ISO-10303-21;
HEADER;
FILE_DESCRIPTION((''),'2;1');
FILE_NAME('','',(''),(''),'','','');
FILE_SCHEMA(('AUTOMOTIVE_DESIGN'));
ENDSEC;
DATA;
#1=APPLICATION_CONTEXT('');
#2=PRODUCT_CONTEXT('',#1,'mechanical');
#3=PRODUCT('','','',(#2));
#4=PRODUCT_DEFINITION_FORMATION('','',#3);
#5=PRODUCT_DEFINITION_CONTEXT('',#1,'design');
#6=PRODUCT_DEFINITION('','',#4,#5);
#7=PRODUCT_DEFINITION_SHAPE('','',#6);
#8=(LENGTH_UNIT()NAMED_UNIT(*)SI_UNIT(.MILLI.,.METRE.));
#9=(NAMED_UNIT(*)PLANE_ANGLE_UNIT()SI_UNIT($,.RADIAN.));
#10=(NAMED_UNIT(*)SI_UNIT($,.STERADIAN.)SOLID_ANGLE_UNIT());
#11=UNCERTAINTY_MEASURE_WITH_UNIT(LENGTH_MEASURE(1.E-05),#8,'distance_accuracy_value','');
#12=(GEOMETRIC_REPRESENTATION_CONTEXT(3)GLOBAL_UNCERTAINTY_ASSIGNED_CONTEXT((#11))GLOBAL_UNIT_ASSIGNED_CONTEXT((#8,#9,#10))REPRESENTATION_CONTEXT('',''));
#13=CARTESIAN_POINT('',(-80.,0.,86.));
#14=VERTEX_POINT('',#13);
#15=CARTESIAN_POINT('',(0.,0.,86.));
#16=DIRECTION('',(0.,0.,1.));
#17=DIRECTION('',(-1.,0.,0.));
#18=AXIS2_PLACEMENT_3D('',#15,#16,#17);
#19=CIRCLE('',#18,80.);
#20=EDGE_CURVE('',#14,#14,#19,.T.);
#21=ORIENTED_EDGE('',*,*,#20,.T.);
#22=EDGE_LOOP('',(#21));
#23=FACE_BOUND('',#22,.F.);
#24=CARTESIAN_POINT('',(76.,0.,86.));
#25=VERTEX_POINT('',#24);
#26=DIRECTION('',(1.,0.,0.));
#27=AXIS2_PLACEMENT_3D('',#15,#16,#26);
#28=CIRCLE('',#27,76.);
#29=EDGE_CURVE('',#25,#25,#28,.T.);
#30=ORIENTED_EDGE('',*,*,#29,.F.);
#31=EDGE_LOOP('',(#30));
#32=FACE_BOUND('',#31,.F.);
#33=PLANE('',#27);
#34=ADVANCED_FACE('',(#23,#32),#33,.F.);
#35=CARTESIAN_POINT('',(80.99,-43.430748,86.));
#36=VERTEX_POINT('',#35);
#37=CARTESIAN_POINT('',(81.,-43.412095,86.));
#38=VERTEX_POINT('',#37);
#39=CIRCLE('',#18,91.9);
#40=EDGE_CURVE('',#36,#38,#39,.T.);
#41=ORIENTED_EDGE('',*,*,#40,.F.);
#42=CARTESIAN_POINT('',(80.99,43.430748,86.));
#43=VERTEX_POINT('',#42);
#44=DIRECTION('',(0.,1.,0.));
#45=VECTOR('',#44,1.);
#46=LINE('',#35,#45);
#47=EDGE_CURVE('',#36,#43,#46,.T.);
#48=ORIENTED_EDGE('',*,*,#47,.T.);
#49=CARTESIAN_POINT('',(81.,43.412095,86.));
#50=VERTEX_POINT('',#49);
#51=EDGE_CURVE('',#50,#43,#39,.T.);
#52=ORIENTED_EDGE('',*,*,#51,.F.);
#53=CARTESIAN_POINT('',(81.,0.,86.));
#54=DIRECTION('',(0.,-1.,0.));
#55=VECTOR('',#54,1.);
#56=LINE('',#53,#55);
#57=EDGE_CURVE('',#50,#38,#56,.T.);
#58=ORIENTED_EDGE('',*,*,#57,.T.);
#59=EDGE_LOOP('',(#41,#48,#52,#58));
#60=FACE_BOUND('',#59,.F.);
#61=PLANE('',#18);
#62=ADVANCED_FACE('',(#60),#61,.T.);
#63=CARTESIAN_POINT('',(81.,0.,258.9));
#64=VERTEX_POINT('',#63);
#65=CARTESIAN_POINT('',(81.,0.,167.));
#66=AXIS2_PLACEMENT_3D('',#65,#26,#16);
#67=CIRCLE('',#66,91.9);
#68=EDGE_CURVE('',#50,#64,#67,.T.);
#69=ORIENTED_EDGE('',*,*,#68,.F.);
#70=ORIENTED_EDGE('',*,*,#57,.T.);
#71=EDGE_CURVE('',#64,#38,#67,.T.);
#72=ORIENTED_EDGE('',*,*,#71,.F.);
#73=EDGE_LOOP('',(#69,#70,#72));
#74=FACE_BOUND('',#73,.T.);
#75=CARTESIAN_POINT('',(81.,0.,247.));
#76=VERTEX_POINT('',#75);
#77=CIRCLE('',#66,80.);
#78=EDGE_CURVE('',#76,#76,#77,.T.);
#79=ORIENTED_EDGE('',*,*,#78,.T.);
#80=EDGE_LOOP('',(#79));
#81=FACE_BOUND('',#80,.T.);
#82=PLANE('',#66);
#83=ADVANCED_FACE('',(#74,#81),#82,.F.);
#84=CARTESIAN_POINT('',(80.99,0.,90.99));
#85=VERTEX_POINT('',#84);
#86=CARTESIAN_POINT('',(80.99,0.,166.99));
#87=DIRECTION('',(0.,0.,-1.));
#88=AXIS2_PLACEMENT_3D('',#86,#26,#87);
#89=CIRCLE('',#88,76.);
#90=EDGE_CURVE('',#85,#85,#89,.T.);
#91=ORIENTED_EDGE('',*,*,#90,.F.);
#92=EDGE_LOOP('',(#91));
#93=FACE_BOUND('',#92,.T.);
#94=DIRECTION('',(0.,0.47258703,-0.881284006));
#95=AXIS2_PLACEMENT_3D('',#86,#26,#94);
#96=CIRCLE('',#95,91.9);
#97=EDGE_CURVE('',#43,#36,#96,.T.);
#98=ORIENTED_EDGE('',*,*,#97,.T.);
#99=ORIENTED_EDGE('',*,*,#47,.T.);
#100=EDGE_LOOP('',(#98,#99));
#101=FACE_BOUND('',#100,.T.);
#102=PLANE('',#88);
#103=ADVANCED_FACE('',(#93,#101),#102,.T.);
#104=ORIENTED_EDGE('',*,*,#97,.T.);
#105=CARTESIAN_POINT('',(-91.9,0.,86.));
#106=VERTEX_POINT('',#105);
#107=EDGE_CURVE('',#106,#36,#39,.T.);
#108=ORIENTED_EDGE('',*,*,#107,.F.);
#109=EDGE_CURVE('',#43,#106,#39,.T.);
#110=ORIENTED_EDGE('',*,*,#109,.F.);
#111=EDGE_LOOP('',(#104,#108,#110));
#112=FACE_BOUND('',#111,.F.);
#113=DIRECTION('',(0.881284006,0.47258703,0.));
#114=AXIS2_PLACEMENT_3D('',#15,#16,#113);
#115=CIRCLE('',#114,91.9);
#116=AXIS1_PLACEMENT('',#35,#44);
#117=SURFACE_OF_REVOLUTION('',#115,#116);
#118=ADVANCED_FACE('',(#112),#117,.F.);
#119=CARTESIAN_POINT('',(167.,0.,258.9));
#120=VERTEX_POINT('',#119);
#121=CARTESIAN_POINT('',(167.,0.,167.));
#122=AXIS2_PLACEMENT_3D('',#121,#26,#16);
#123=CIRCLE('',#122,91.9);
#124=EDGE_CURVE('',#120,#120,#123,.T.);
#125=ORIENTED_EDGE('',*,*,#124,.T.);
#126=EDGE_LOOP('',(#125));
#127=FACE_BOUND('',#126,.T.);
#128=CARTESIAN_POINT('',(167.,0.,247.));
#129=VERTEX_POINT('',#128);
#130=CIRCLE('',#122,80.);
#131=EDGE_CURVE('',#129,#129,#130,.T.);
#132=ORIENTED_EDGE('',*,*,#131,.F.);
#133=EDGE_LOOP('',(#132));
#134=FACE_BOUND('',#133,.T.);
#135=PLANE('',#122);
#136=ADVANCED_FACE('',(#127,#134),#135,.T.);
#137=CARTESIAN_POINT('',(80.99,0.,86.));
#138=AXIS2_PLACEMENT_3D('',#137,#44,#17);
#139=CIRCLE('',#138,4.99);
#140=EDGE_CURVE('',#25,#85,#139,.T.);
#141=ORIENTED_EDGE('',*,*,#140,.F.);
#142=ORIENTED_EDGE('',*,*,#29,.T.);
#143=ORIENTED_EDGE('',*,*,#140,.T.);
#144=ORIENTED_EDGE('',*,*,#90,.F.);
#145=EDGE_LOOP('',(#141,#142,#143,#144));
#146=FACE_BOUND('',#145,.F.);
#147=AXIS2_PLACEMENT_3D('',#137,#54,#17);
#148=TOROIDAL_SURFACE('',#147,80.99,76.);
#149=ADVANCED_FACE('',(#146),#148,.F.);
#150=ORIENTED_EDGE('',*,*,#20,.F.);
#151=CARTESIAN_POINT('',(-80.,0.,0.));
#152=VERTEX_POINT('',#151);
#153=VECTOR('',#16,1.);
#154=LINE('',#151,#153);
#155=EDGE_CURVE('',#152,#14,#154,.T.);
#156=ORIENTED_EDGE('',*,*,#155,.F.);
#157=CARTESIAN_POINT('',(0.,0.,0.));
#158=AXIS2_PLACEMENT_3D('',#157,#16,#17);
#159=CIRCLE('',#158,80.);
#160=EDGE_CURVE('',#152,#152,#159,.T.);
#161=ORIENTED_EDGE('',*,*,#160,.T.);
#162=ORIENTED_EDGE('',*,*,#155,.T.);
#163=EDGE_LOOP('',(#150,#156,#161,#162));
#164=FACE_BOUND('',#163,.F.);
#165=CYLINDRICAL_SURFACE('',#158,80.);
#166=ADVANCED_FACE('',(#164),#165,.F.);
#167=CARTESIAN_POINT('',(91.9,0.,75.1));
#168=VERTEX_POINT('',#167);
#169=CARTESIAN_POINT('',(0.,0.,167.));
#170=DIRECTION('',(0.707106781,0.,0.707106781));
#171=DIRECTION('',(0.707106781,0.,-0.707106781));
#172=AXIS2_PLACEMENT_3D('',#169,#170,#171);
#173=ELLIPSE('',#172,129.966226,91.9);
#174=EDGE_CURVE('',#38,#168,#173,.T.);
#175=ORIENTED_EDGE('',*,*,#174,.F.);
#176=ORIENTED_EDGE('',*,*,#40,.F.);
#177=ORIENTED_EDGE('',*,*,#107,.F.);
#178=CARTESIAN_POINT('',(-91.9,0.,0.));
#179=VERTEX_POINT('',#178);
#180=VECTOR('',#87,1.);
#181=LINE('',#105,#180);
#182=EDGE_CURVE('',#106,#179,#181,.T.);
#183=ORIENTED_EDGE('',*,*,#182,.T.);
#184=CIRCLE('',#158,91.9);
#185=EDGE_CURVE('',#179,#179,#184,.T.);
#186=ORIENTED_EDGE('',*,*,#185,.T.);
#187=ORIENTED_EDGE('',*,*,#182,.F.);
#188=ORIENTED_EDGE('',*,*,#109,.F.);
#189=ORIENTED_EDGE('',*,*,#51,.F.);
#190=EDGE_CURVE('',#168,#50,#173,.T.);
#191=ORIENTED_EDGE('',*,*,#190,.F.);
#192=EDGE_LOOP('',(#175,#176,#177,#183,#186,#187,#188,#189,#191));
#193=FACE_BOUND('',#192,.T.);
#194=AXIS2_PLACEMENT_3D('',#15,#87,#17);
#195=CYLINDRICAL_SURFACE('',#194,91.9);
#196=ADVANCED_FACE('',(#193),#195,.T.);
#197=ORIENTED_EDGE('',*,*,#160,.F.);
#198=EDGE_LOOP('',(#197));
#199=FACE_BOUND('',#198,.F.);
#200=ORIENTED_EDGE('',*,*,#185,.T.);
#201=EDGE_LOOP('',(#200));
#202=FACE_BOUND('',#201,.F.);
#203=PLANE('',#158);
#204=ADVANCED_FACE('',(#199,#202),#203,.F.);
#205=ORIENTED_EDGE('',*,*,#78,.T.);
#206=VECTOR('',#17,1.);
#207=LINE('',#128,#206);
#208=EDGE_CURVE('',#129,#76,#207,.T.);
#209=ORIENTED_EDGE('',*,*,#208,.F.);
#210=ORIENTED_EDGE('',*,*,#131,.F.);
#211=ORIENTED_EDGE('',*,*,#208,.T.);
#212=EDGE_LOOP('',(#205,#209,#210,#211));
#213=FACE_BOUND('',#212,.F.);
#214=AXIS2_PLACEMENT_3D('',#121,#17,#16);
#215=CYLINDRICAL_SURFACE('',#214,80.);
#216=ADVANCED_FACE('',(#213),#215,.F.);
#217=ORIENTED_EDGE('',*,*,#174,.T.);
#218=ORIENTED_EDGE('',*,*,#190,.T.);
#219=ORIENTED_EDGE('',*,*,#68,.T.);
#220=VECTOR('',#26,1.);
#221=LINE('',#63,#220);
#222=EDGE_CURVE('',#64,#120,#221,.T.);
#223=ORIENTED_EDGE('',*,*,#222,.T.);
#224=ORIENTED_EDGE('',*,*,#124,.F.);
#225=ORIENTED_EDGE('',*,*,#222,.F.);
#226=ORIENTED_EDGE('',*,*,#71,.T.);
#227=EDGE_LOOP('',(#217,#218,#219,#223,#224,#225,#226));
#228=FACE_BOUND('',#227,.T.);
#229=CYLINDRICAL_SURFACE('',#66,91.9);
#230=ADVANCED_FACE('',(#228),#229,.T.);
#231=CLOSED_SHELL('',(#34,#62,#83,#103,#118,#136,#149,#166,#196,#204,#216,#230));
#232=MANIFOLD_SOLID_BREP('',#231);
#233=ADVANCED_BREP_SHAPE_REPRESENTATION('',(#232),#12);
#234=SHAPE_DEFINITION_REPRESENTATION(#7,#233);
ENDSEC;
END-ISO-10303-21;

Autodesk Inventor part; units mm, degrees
ref_plane "YZ Plane" through (0, 0, 0) normal (1, 0, 0) x (0, 1, 0)
ref_plane "XZ Plane" through (0, 0, 0) normal (0, 1, 0) x (-1, 0, 0)
ref_plane "XY Plane" through (0, 0, 0) normal (0, 0, 1) x (1, 0, 0)
sketch "Sketch1" plane through (0, 0, 0) normal (0, 1, 0) x (-1, 0, 0)
  line L0 (0, 0) -> (0, 167) construction
  line L1 (0, 167) -> (-167, 167) construction
  line L2 (91.9, 0) -> (80, 0)
  line L3 (80, 0) -> (80, 86)
  line L4 (80, 86) -> (91.9, 86)
  line L5 (91.9, 86) -> (91.9, 0)
  line L6 (0, 0) -> (80, 0) construction
  line L7 (80, 86) -> (0, 86) construction
  line L8 (-167, 167) -> (-167, 247) construction
  line L9 (-167, 247) -> (-81, 247)
  line L10 (-81, 247) -> (-81, 258.9)
  line L11 (-81, 258.9) -> (-167, 258.9)
  line L12 (-167, 258.9) -> (-167, 247)
  line L13 (-81, 247) -> (-81, 167) construction
  dimension "d0" = 86
  dimension "d1" = 81
  dimension "d2" = 160
  dimension "d3" = 11.9
  dimension "d4" = 86
  dimension "d5" = 11.9
  dimension "d6" = 160
  dimension "d7" = 81
revolve "Revolution1" add sketch "Sketch1" angle 360 about axis through (0, 0, 167) along (1, 0, 0) contours L12 L11 L10 L9
revolve "Revolution2" add sketch "Sketch1" angle 360 about axis through (0, 0, 0) along (0, 0, 1) contours L2 L3 L4 L5
sketch "Sketch2" plane through (0, 0, 86) normal (0, 0, 1) x (1, 0, 0)
  line L0 (81, 43.412095) -> (81, -43.412095)
  line L1 (81, -43.412095) -> (81, 43.412095)
  line L2 (81, 80) -> (81, -80)
  line L3 (80.99, -43.430748) -> (80.99, 43.430748)
  arc A0 (81, 43.412095) -> (81, -43.412095) centre (0, 0) ccw
  circle A1 centre (0, 0) radius 91.9
  circle A2 centre (0, 0) radius 76
  dimension "d8" = 0.01
  dimension "d9" = 183.8
  dimension "d10" = 152
sketch "Sketch2 outline for Revolution3" plane through (0, 0, 86) normal (0, 0, 1) x (1, 0, 0)
  arc A0 (80.99, 43.430748) -> (80.99, -43.430748) centre (0, 0) ccw
  line L0 (80.99, -43.430748) -> (80.99, 43.430748)
  circle A1 centre (0, 0) radius 76
revolve "Revolution3" add sketch "Sketch2 outline for Revolution3" angle 90 about axis through (80.99, -43.430748, 86) along (0, 1, 0)
equation "\"d0\" = t1"
equation "\"d1\" = z1"
equation "\"d2\" = dd1"
equation "\"d3\" = s1"
equation "\"d4\" = t1"
equation "\"d5\" = s1"
equation "\"d6\" = dd1"
equation "\"d7\" = z1"
equation "\"d9\" = dd1 + 2 * s1"
equation "\"d10\" = 0.95 * dd1"
equation "\"z1\" = 81"
equation "\"t1\" = 86"
equation "\"s1\" = 11.9"
equation "\"dd1\" = 160"
properties part number "DIN 8063 Колено 90 градусов, тип W1 160" material "ПВХ, непластифицированный"
